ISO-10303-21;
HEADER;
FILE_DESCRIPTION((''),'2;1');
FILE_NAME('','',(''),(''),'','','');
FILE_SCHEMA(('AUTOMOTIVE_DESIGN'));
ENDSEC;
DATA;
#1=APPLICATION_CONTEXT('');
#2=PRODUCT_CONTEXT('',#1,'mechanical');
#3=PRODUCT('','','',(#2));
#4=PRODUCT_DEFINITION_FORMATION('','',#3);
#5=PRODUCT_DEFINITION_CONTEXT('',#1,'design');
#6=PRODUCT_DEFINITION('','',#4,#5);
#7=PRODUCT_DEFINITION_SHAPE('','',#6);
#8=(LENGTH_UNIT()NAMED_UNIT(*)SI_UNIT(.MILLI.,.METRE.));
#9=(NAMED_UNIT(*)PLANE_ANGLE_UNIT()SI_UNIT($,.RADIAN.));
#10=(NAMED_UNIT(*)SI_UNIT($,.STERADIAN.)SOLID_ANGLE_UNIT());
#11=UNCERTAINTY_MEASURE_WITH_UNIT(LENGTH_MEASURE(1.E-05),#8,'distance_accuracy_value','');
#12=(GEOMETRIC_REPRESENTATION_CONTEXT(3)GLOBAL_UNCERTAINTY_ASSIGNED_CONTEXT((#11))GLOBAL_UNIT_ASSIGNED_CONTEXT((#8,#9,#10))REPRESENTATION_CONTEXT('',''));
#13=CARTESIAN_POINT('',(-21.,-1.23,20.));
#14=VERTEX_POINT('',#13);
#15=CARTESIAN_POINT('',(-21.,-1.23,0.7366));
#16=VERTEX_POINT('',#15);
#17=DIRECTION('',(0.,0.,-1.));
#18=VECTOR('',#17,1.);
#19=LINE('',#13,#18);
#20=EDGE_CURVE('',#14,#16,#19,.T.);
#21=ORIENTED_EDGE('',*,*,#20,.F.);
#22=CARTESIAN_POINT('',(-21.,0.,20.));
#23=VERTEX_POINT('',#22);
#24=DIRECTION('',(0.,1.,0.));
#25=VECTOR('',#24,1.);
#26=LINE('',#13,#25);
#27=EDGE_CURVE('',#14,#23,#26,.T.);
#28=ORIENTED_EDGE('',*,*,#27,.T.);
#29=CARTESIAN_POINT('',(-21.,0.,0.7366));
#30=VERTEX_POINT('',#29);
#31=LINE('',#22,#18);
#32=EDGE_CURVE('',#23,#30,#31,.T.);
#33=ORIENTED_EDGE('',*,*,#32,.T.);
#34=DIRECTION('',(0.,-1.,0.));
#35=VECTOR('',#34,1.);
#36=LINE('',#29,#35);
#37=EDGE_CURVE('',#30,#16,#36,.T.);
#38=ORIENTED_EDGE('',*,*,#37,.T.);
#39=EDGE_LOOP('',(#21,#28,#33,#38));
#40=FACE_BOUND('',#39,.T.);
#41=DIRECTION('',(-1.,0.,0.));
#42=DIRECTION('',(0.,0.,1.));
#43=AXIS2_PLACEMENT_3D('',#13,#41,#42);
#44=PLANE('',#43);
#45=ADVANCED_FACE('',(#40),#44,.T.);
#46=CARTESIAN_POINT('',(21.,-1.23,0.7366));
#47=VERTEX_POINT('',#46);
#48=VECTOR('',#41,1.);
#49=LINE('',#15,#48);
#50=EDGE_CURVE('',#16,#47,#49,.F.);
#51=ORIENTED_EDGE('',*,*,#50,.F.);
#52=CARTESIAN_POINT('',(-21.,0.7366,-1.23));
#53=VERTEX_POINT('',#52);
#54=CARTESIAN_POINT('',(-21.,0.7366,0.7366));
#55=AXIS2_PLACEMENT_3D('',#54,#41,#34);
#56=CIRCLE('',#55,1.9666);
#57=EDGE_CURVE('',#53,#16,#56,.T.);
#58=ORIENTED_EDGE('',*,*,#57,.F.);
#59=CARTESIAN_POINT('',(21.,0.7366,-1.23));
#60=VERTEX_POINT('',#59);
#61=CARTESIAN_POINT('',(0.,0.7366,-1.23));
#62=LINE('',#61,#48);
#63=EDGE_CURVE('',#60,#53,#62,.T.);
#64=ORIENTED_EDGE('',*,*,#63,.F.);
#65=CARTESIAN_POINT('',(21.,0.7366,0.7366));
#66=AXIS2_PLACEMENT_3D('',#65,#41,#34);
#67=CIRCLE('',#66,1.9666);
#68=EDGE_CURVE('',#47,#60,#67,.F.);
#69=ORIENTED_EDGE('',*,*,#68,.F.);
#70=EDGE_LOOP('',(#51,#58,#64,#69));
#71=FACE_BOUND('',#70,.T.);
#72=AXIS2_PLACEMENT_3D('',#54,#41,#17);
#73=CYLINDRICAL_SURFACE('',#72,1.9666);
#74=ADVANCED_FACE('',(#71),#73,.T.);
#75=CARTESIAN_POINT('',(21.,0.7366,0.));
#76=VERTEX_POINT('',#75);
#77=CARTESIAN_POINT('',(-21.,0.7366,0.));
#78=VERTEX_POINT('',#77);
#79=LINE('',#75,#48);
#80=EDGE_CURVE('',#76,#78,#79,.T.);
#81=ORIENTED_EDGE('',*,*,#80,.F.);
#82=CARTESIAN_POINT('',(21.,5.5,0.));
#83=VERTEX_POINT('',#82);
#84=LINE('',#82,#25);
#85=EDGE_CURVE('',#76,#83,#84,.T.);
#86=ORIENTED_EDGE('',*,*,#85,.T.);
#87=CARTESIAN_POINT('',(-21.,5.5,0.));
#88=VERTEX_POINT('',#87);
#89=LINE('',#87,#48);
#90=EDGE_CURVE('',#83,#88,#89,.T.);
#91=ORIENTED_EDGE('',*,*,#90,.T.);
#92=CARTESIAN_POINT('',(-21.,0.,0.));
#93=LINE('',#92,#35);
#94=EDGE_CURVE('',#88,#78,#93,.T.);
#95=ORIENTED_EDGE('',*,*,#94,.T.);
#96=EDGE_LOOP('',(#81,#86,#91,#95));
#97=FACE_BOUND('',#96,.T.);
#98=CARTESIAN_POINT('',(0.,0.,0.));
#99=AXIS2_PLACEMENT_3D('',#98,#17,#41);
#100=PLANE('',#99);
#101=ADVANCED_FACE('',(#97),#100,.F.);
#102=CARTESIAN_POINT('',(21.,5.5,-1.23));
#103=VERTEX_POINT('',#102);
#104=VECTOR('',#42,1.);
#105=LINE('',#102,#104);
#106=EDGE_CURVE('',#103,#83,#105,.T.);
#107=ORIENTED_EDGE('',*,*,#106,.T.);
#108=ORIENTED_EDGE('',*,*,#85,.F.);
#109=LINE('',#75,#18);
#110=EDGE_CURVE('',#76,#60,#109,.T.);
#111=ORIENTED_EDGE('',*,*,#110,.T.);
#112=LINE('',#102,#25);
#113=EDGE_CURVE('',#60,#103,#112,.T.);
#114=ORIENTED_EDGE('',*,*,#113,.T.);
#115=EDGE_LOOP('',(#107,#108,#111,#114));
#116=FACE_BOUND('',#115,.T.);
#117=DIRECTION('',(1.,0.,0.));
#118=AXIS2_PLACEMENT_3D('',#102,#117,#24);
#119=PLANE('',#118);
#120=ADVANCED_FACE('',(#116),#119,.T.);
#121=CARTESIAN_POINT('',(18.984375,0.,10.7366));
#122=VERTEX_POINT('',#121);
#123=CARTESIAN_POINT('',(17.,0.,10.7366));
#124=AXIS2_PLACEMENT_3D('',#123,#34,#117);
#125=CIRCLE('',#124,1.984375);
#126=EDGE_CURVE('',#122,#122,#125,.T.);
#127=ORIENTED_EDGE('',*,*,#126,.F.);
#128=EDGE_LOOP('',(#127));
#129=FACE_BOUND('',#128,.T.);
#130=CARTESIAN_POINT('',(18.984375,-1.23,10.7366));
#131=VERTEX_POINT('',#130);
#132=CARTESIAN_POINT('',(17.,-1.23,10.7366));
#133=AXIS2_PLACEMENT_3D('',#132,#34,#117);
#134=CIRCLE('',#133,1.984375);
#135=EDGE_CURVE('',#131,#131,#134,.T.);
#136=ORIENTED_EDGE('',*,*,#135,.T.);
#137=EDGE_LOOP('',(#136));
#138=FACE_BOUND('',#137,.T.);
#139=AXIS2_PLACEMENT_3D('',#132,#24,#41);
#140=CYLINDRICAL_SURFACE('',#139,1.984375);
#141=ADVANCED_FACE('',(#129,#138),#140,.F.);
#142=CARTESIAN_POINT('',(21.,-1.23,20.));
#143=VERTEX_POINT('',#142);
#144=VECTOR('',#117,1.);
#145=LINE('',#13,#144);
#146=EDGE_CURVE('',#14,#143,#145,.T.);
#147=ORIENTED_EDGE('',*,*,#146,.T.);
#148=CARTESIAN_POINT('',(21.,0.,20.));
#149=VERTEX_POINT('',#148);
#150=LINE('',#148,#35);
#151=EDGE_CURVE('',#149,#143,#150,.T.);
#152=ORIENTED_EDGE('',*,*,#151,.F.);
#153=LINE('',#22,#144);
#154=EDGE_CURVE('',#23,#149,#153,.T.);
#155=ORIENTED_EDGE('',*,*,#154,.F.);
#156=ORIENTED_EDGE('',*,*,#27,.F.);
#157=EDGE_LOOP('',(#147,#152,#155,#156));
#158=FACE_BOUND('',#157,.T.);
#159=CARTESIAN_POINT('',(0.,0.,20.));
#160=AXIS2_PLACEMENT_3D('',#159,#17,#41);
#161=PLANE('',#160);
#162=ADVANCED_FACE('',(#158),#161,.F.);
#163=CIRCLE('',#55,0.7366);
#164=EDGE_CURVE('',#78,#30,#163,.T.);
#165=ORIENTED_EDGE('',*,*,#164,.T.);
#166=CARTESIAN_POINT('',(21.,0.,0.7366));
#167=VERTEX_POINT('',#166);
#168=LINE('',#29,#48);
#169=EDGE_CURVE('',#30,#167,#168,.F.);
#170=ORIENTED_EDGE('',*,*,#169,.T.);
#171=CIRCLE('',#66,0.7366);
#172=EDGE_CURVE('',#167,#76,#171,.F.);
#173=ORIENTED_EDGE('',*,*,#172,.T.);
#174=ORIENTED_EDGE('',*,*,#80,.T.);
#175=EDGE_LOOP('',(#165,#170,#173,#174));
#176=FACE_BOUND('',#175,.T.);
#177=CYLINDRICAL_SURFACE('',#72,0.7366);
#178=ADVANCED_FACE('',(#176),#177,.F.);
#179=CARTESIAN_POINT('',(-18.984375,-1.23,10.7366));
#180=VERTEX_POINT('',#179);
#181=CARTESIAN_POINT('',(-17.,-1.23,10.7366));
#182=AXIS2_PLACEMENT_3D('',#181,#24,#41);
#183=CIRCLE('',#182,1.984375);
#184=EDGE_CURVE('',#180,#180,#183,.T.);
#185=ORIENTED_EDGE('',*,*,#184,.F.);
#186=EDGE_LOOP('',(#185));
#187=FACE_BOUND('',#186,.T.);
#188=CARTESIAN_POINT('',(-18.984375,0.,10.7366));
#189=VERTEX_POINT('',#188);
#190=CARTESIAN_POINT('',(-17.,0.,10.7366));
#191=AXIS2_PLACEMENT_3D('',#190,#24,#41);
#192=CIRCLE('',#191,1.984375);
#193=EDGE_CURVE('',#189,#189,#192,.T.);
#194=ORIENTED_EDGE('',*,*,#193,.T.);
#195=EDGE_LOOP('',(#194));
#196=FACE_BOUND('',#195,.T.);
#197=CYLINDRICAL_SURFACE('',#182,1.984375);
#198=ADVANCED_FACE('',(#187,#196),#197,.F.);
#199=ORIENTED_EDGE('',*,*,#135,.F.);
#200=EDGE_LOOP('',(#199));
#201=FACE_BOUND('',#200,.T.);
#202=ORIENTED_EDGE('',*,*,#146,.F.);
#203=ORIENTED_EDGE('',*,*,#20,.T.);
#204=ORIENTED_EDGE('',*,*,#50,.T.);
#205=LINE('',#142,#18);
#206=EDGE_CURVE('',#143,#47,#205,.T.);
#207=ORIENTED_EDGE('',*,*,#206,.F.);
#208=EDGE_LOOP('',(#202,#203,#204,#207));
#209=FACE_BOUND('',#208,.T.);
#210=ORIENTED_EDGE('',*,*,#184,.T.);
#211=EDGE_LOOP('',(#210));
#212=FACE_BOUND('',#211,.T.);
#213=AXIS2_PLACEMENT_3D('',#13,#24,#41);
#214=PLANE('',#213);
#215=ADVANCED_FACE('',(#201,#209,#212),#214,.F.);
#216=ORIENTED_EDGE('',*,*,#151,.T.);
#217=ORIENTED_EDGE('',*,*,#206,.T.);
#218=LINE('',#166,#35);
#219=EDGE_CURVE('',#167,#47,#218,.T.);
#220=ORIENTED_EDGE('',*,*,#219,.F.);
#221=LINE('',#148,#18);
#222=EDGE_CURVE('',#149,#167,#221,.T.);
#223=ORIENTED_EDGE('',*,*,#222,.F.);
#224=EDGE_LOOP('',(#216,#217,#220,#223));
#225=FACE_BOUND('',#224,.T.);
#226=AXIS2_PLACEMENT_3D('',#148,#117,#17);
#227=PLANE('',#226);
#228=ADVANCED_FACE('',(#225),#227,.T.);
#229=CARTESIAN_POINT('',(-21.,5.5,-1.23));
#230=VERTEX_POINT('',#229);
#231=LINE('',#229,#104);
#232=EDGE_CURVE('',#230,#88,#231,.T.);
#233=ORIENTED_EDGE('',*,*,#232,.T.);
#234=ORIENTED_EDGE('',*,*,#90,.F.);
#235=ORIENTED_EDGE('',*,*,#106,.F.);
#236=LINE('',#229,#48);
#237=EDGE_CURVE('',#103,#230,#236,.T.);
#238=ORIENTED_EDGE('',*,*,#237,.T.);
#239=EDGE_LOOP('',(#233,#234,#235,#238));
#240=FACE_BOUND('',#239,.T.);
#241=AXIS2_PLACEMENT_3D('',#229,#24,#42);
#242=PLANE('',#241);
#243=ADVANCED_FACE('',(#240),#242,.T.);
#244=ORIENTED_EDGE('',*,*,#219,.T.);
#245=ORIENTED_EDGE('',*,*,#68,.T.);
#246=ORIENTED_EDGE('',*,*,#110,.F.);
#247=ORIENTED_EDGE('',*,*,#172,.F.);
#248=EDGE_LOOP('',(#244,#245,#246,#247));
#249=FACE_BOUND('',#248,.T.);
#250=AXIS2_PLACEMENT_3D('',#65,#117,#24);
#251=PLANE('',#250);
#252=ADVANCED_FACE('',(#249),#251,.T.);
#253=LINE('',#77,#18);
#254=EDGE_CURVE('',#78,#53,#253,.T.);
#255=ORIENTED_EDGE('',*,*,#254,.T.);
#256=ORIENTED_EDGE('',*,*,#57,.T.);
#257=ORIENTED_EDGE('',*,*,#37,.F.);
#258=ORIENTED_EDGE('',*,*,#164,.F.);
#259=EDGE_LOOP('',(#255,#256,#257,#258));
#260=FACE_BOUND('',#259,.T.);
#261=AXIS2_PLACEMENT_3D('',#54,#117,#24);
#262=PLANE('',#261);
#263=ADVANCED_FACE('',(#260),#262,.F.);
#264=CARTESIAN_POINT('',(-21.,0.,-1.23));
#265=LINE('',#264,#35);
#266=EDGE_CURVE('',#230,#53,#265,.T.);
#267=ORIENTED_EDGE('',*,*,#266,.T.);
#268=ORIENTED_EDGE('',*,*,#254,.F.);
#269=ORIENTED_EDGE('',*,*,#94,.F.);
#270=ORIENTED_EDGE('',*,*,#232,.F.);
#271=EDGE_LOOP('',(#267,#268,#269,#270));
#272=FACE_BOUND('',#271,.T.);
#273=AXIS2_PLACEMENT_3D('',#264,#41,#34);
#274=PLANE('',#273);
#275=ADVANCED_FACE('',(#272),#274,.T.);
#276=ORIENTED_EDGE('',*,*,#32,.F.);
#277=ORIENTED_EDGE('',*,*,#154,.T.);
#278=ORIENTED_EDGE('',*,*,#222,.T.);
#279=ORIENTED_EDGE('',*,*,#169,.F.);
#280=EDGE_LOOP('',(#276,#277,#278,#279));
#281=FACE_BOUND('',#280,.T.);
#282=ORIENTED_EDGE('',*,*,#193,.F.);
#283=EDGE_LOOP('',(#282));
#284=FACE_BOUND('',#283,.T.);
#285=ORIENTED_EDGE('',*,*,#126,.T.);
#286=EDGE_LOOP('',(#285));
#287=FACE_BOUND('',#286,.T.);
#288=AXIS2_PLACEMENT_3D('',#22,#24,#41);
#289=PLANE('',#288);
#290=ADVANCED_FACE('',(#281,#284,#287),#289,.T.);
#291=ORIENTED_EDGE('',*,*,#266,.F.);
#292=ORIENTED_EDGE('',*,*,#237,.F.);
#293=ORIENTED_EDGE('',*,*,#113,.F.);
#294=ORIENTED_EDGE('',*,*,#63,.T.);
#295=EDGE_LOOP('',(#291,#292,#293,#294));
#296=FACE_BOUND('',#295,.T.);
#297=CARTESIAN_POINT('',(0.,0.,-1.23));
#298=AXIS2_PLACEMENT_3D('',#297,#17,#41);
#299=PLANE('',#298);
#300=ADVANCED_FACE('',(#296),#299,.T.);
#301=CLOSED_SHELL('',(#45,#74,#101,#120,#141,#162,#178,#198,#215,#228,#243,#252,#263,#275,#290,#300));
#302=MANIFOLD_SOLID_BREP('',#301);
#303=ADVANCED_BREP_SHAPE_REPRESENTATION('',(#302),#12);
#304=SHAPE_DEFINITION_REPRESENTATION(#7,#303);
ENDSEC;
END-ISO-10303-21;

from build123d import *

# Parameters (mm, degrees)
SKETCH1_W                    = 42
SKETCH1_H                    = 1.23
BASE_FLANGE1_DEPTH           = 20
EDGE_FLANGE1_STRIP_W         = 6.3932
EDGE_FLANGE1_STRIP_H         = 1.23
EDGE_FLANGE1_STRIP_CUT_DEPTH = 42
EDGE_FLANGE1_DEPTH           = 42
SKETCH9_R                    = 1.984375
CUT_EXTRUDE1_DEPTH           = 30.516944286


# Sheet-metal steps are written as plain solids
with BuildPart() as part:
    # Sketch1 → Base-Flange1 (new body)
    with BuildSketch(Plane.XY):
        with Locations((0, -0.615)):
            Rectangle(SKETCH1_W, SKETCH1_H)
    extrude(amount=BASE_FLANGE1_DEPTH)

    # Edge-Flange1 strip (across the edge) → Edge-Flange1 strip cut (cut)
    with BuildSketch(Plane.ZY.offset(-21)):
        with Locations((-2.46, -0.615)):
            Rectangle(EDGE_FLANGE1_STRIP_W, EDGE_FLANGE1_STRIP_H)
    extrude(amount=EDGE_FLANGE1_STRIP_CUT_DEPTH, mode=Mode.SUBTRACT)

    # Edge-Flange1 section (across the edge) → Edge-Flange1 (add)
    with BuildSketch(Plane.ZY.offset(-21)):
        with BuildLine():
            Line((-1.23, 0.7366), (-1.23, 5.5))
            Line((-1.23, 5.5), (0, 5.5))
            Line((0, 5.5), (0, 0.7366))
            ThreePointArc((0, 0.7366), (0.215745145, 0.215745145), (0.7366, 0))
            Line((0.7366, 0), (0.7366, -1.23))
            ThreePointArc((0.7366, -1.23), (-0.653996196, -0.653996196), (-1.23, 0.7366))
        make_face()
    extrude(amount=EDGE_FLANGE1_DEPTH)

    # Sketch9 → Cut-Extrude1 (cut, through all)
    with BuildSketch(Plane(origin=(0, 0, 0), x_dir=(1, 0, 0), z_dir=(0, 1, 0))):
        with Locations(Location((-17, -10.7366, 0), (0, 0, 180))):
            Circle(SKETCH9_R)
    cut_extrude1 = extrude(amount=-CUT_EXTRUDE1_DEPTH, mode=Mode.SUBTRACT)

    # Mirror1: Cut-Extrude1 across plane
    add(cut_extrude1.mirror(Plane(origin=(0, 0, 0), x_dir=(0, 0, 1), z_dir=(1, 0, 0))), mode=Mode.SUBTRACT)


solid = part.part
